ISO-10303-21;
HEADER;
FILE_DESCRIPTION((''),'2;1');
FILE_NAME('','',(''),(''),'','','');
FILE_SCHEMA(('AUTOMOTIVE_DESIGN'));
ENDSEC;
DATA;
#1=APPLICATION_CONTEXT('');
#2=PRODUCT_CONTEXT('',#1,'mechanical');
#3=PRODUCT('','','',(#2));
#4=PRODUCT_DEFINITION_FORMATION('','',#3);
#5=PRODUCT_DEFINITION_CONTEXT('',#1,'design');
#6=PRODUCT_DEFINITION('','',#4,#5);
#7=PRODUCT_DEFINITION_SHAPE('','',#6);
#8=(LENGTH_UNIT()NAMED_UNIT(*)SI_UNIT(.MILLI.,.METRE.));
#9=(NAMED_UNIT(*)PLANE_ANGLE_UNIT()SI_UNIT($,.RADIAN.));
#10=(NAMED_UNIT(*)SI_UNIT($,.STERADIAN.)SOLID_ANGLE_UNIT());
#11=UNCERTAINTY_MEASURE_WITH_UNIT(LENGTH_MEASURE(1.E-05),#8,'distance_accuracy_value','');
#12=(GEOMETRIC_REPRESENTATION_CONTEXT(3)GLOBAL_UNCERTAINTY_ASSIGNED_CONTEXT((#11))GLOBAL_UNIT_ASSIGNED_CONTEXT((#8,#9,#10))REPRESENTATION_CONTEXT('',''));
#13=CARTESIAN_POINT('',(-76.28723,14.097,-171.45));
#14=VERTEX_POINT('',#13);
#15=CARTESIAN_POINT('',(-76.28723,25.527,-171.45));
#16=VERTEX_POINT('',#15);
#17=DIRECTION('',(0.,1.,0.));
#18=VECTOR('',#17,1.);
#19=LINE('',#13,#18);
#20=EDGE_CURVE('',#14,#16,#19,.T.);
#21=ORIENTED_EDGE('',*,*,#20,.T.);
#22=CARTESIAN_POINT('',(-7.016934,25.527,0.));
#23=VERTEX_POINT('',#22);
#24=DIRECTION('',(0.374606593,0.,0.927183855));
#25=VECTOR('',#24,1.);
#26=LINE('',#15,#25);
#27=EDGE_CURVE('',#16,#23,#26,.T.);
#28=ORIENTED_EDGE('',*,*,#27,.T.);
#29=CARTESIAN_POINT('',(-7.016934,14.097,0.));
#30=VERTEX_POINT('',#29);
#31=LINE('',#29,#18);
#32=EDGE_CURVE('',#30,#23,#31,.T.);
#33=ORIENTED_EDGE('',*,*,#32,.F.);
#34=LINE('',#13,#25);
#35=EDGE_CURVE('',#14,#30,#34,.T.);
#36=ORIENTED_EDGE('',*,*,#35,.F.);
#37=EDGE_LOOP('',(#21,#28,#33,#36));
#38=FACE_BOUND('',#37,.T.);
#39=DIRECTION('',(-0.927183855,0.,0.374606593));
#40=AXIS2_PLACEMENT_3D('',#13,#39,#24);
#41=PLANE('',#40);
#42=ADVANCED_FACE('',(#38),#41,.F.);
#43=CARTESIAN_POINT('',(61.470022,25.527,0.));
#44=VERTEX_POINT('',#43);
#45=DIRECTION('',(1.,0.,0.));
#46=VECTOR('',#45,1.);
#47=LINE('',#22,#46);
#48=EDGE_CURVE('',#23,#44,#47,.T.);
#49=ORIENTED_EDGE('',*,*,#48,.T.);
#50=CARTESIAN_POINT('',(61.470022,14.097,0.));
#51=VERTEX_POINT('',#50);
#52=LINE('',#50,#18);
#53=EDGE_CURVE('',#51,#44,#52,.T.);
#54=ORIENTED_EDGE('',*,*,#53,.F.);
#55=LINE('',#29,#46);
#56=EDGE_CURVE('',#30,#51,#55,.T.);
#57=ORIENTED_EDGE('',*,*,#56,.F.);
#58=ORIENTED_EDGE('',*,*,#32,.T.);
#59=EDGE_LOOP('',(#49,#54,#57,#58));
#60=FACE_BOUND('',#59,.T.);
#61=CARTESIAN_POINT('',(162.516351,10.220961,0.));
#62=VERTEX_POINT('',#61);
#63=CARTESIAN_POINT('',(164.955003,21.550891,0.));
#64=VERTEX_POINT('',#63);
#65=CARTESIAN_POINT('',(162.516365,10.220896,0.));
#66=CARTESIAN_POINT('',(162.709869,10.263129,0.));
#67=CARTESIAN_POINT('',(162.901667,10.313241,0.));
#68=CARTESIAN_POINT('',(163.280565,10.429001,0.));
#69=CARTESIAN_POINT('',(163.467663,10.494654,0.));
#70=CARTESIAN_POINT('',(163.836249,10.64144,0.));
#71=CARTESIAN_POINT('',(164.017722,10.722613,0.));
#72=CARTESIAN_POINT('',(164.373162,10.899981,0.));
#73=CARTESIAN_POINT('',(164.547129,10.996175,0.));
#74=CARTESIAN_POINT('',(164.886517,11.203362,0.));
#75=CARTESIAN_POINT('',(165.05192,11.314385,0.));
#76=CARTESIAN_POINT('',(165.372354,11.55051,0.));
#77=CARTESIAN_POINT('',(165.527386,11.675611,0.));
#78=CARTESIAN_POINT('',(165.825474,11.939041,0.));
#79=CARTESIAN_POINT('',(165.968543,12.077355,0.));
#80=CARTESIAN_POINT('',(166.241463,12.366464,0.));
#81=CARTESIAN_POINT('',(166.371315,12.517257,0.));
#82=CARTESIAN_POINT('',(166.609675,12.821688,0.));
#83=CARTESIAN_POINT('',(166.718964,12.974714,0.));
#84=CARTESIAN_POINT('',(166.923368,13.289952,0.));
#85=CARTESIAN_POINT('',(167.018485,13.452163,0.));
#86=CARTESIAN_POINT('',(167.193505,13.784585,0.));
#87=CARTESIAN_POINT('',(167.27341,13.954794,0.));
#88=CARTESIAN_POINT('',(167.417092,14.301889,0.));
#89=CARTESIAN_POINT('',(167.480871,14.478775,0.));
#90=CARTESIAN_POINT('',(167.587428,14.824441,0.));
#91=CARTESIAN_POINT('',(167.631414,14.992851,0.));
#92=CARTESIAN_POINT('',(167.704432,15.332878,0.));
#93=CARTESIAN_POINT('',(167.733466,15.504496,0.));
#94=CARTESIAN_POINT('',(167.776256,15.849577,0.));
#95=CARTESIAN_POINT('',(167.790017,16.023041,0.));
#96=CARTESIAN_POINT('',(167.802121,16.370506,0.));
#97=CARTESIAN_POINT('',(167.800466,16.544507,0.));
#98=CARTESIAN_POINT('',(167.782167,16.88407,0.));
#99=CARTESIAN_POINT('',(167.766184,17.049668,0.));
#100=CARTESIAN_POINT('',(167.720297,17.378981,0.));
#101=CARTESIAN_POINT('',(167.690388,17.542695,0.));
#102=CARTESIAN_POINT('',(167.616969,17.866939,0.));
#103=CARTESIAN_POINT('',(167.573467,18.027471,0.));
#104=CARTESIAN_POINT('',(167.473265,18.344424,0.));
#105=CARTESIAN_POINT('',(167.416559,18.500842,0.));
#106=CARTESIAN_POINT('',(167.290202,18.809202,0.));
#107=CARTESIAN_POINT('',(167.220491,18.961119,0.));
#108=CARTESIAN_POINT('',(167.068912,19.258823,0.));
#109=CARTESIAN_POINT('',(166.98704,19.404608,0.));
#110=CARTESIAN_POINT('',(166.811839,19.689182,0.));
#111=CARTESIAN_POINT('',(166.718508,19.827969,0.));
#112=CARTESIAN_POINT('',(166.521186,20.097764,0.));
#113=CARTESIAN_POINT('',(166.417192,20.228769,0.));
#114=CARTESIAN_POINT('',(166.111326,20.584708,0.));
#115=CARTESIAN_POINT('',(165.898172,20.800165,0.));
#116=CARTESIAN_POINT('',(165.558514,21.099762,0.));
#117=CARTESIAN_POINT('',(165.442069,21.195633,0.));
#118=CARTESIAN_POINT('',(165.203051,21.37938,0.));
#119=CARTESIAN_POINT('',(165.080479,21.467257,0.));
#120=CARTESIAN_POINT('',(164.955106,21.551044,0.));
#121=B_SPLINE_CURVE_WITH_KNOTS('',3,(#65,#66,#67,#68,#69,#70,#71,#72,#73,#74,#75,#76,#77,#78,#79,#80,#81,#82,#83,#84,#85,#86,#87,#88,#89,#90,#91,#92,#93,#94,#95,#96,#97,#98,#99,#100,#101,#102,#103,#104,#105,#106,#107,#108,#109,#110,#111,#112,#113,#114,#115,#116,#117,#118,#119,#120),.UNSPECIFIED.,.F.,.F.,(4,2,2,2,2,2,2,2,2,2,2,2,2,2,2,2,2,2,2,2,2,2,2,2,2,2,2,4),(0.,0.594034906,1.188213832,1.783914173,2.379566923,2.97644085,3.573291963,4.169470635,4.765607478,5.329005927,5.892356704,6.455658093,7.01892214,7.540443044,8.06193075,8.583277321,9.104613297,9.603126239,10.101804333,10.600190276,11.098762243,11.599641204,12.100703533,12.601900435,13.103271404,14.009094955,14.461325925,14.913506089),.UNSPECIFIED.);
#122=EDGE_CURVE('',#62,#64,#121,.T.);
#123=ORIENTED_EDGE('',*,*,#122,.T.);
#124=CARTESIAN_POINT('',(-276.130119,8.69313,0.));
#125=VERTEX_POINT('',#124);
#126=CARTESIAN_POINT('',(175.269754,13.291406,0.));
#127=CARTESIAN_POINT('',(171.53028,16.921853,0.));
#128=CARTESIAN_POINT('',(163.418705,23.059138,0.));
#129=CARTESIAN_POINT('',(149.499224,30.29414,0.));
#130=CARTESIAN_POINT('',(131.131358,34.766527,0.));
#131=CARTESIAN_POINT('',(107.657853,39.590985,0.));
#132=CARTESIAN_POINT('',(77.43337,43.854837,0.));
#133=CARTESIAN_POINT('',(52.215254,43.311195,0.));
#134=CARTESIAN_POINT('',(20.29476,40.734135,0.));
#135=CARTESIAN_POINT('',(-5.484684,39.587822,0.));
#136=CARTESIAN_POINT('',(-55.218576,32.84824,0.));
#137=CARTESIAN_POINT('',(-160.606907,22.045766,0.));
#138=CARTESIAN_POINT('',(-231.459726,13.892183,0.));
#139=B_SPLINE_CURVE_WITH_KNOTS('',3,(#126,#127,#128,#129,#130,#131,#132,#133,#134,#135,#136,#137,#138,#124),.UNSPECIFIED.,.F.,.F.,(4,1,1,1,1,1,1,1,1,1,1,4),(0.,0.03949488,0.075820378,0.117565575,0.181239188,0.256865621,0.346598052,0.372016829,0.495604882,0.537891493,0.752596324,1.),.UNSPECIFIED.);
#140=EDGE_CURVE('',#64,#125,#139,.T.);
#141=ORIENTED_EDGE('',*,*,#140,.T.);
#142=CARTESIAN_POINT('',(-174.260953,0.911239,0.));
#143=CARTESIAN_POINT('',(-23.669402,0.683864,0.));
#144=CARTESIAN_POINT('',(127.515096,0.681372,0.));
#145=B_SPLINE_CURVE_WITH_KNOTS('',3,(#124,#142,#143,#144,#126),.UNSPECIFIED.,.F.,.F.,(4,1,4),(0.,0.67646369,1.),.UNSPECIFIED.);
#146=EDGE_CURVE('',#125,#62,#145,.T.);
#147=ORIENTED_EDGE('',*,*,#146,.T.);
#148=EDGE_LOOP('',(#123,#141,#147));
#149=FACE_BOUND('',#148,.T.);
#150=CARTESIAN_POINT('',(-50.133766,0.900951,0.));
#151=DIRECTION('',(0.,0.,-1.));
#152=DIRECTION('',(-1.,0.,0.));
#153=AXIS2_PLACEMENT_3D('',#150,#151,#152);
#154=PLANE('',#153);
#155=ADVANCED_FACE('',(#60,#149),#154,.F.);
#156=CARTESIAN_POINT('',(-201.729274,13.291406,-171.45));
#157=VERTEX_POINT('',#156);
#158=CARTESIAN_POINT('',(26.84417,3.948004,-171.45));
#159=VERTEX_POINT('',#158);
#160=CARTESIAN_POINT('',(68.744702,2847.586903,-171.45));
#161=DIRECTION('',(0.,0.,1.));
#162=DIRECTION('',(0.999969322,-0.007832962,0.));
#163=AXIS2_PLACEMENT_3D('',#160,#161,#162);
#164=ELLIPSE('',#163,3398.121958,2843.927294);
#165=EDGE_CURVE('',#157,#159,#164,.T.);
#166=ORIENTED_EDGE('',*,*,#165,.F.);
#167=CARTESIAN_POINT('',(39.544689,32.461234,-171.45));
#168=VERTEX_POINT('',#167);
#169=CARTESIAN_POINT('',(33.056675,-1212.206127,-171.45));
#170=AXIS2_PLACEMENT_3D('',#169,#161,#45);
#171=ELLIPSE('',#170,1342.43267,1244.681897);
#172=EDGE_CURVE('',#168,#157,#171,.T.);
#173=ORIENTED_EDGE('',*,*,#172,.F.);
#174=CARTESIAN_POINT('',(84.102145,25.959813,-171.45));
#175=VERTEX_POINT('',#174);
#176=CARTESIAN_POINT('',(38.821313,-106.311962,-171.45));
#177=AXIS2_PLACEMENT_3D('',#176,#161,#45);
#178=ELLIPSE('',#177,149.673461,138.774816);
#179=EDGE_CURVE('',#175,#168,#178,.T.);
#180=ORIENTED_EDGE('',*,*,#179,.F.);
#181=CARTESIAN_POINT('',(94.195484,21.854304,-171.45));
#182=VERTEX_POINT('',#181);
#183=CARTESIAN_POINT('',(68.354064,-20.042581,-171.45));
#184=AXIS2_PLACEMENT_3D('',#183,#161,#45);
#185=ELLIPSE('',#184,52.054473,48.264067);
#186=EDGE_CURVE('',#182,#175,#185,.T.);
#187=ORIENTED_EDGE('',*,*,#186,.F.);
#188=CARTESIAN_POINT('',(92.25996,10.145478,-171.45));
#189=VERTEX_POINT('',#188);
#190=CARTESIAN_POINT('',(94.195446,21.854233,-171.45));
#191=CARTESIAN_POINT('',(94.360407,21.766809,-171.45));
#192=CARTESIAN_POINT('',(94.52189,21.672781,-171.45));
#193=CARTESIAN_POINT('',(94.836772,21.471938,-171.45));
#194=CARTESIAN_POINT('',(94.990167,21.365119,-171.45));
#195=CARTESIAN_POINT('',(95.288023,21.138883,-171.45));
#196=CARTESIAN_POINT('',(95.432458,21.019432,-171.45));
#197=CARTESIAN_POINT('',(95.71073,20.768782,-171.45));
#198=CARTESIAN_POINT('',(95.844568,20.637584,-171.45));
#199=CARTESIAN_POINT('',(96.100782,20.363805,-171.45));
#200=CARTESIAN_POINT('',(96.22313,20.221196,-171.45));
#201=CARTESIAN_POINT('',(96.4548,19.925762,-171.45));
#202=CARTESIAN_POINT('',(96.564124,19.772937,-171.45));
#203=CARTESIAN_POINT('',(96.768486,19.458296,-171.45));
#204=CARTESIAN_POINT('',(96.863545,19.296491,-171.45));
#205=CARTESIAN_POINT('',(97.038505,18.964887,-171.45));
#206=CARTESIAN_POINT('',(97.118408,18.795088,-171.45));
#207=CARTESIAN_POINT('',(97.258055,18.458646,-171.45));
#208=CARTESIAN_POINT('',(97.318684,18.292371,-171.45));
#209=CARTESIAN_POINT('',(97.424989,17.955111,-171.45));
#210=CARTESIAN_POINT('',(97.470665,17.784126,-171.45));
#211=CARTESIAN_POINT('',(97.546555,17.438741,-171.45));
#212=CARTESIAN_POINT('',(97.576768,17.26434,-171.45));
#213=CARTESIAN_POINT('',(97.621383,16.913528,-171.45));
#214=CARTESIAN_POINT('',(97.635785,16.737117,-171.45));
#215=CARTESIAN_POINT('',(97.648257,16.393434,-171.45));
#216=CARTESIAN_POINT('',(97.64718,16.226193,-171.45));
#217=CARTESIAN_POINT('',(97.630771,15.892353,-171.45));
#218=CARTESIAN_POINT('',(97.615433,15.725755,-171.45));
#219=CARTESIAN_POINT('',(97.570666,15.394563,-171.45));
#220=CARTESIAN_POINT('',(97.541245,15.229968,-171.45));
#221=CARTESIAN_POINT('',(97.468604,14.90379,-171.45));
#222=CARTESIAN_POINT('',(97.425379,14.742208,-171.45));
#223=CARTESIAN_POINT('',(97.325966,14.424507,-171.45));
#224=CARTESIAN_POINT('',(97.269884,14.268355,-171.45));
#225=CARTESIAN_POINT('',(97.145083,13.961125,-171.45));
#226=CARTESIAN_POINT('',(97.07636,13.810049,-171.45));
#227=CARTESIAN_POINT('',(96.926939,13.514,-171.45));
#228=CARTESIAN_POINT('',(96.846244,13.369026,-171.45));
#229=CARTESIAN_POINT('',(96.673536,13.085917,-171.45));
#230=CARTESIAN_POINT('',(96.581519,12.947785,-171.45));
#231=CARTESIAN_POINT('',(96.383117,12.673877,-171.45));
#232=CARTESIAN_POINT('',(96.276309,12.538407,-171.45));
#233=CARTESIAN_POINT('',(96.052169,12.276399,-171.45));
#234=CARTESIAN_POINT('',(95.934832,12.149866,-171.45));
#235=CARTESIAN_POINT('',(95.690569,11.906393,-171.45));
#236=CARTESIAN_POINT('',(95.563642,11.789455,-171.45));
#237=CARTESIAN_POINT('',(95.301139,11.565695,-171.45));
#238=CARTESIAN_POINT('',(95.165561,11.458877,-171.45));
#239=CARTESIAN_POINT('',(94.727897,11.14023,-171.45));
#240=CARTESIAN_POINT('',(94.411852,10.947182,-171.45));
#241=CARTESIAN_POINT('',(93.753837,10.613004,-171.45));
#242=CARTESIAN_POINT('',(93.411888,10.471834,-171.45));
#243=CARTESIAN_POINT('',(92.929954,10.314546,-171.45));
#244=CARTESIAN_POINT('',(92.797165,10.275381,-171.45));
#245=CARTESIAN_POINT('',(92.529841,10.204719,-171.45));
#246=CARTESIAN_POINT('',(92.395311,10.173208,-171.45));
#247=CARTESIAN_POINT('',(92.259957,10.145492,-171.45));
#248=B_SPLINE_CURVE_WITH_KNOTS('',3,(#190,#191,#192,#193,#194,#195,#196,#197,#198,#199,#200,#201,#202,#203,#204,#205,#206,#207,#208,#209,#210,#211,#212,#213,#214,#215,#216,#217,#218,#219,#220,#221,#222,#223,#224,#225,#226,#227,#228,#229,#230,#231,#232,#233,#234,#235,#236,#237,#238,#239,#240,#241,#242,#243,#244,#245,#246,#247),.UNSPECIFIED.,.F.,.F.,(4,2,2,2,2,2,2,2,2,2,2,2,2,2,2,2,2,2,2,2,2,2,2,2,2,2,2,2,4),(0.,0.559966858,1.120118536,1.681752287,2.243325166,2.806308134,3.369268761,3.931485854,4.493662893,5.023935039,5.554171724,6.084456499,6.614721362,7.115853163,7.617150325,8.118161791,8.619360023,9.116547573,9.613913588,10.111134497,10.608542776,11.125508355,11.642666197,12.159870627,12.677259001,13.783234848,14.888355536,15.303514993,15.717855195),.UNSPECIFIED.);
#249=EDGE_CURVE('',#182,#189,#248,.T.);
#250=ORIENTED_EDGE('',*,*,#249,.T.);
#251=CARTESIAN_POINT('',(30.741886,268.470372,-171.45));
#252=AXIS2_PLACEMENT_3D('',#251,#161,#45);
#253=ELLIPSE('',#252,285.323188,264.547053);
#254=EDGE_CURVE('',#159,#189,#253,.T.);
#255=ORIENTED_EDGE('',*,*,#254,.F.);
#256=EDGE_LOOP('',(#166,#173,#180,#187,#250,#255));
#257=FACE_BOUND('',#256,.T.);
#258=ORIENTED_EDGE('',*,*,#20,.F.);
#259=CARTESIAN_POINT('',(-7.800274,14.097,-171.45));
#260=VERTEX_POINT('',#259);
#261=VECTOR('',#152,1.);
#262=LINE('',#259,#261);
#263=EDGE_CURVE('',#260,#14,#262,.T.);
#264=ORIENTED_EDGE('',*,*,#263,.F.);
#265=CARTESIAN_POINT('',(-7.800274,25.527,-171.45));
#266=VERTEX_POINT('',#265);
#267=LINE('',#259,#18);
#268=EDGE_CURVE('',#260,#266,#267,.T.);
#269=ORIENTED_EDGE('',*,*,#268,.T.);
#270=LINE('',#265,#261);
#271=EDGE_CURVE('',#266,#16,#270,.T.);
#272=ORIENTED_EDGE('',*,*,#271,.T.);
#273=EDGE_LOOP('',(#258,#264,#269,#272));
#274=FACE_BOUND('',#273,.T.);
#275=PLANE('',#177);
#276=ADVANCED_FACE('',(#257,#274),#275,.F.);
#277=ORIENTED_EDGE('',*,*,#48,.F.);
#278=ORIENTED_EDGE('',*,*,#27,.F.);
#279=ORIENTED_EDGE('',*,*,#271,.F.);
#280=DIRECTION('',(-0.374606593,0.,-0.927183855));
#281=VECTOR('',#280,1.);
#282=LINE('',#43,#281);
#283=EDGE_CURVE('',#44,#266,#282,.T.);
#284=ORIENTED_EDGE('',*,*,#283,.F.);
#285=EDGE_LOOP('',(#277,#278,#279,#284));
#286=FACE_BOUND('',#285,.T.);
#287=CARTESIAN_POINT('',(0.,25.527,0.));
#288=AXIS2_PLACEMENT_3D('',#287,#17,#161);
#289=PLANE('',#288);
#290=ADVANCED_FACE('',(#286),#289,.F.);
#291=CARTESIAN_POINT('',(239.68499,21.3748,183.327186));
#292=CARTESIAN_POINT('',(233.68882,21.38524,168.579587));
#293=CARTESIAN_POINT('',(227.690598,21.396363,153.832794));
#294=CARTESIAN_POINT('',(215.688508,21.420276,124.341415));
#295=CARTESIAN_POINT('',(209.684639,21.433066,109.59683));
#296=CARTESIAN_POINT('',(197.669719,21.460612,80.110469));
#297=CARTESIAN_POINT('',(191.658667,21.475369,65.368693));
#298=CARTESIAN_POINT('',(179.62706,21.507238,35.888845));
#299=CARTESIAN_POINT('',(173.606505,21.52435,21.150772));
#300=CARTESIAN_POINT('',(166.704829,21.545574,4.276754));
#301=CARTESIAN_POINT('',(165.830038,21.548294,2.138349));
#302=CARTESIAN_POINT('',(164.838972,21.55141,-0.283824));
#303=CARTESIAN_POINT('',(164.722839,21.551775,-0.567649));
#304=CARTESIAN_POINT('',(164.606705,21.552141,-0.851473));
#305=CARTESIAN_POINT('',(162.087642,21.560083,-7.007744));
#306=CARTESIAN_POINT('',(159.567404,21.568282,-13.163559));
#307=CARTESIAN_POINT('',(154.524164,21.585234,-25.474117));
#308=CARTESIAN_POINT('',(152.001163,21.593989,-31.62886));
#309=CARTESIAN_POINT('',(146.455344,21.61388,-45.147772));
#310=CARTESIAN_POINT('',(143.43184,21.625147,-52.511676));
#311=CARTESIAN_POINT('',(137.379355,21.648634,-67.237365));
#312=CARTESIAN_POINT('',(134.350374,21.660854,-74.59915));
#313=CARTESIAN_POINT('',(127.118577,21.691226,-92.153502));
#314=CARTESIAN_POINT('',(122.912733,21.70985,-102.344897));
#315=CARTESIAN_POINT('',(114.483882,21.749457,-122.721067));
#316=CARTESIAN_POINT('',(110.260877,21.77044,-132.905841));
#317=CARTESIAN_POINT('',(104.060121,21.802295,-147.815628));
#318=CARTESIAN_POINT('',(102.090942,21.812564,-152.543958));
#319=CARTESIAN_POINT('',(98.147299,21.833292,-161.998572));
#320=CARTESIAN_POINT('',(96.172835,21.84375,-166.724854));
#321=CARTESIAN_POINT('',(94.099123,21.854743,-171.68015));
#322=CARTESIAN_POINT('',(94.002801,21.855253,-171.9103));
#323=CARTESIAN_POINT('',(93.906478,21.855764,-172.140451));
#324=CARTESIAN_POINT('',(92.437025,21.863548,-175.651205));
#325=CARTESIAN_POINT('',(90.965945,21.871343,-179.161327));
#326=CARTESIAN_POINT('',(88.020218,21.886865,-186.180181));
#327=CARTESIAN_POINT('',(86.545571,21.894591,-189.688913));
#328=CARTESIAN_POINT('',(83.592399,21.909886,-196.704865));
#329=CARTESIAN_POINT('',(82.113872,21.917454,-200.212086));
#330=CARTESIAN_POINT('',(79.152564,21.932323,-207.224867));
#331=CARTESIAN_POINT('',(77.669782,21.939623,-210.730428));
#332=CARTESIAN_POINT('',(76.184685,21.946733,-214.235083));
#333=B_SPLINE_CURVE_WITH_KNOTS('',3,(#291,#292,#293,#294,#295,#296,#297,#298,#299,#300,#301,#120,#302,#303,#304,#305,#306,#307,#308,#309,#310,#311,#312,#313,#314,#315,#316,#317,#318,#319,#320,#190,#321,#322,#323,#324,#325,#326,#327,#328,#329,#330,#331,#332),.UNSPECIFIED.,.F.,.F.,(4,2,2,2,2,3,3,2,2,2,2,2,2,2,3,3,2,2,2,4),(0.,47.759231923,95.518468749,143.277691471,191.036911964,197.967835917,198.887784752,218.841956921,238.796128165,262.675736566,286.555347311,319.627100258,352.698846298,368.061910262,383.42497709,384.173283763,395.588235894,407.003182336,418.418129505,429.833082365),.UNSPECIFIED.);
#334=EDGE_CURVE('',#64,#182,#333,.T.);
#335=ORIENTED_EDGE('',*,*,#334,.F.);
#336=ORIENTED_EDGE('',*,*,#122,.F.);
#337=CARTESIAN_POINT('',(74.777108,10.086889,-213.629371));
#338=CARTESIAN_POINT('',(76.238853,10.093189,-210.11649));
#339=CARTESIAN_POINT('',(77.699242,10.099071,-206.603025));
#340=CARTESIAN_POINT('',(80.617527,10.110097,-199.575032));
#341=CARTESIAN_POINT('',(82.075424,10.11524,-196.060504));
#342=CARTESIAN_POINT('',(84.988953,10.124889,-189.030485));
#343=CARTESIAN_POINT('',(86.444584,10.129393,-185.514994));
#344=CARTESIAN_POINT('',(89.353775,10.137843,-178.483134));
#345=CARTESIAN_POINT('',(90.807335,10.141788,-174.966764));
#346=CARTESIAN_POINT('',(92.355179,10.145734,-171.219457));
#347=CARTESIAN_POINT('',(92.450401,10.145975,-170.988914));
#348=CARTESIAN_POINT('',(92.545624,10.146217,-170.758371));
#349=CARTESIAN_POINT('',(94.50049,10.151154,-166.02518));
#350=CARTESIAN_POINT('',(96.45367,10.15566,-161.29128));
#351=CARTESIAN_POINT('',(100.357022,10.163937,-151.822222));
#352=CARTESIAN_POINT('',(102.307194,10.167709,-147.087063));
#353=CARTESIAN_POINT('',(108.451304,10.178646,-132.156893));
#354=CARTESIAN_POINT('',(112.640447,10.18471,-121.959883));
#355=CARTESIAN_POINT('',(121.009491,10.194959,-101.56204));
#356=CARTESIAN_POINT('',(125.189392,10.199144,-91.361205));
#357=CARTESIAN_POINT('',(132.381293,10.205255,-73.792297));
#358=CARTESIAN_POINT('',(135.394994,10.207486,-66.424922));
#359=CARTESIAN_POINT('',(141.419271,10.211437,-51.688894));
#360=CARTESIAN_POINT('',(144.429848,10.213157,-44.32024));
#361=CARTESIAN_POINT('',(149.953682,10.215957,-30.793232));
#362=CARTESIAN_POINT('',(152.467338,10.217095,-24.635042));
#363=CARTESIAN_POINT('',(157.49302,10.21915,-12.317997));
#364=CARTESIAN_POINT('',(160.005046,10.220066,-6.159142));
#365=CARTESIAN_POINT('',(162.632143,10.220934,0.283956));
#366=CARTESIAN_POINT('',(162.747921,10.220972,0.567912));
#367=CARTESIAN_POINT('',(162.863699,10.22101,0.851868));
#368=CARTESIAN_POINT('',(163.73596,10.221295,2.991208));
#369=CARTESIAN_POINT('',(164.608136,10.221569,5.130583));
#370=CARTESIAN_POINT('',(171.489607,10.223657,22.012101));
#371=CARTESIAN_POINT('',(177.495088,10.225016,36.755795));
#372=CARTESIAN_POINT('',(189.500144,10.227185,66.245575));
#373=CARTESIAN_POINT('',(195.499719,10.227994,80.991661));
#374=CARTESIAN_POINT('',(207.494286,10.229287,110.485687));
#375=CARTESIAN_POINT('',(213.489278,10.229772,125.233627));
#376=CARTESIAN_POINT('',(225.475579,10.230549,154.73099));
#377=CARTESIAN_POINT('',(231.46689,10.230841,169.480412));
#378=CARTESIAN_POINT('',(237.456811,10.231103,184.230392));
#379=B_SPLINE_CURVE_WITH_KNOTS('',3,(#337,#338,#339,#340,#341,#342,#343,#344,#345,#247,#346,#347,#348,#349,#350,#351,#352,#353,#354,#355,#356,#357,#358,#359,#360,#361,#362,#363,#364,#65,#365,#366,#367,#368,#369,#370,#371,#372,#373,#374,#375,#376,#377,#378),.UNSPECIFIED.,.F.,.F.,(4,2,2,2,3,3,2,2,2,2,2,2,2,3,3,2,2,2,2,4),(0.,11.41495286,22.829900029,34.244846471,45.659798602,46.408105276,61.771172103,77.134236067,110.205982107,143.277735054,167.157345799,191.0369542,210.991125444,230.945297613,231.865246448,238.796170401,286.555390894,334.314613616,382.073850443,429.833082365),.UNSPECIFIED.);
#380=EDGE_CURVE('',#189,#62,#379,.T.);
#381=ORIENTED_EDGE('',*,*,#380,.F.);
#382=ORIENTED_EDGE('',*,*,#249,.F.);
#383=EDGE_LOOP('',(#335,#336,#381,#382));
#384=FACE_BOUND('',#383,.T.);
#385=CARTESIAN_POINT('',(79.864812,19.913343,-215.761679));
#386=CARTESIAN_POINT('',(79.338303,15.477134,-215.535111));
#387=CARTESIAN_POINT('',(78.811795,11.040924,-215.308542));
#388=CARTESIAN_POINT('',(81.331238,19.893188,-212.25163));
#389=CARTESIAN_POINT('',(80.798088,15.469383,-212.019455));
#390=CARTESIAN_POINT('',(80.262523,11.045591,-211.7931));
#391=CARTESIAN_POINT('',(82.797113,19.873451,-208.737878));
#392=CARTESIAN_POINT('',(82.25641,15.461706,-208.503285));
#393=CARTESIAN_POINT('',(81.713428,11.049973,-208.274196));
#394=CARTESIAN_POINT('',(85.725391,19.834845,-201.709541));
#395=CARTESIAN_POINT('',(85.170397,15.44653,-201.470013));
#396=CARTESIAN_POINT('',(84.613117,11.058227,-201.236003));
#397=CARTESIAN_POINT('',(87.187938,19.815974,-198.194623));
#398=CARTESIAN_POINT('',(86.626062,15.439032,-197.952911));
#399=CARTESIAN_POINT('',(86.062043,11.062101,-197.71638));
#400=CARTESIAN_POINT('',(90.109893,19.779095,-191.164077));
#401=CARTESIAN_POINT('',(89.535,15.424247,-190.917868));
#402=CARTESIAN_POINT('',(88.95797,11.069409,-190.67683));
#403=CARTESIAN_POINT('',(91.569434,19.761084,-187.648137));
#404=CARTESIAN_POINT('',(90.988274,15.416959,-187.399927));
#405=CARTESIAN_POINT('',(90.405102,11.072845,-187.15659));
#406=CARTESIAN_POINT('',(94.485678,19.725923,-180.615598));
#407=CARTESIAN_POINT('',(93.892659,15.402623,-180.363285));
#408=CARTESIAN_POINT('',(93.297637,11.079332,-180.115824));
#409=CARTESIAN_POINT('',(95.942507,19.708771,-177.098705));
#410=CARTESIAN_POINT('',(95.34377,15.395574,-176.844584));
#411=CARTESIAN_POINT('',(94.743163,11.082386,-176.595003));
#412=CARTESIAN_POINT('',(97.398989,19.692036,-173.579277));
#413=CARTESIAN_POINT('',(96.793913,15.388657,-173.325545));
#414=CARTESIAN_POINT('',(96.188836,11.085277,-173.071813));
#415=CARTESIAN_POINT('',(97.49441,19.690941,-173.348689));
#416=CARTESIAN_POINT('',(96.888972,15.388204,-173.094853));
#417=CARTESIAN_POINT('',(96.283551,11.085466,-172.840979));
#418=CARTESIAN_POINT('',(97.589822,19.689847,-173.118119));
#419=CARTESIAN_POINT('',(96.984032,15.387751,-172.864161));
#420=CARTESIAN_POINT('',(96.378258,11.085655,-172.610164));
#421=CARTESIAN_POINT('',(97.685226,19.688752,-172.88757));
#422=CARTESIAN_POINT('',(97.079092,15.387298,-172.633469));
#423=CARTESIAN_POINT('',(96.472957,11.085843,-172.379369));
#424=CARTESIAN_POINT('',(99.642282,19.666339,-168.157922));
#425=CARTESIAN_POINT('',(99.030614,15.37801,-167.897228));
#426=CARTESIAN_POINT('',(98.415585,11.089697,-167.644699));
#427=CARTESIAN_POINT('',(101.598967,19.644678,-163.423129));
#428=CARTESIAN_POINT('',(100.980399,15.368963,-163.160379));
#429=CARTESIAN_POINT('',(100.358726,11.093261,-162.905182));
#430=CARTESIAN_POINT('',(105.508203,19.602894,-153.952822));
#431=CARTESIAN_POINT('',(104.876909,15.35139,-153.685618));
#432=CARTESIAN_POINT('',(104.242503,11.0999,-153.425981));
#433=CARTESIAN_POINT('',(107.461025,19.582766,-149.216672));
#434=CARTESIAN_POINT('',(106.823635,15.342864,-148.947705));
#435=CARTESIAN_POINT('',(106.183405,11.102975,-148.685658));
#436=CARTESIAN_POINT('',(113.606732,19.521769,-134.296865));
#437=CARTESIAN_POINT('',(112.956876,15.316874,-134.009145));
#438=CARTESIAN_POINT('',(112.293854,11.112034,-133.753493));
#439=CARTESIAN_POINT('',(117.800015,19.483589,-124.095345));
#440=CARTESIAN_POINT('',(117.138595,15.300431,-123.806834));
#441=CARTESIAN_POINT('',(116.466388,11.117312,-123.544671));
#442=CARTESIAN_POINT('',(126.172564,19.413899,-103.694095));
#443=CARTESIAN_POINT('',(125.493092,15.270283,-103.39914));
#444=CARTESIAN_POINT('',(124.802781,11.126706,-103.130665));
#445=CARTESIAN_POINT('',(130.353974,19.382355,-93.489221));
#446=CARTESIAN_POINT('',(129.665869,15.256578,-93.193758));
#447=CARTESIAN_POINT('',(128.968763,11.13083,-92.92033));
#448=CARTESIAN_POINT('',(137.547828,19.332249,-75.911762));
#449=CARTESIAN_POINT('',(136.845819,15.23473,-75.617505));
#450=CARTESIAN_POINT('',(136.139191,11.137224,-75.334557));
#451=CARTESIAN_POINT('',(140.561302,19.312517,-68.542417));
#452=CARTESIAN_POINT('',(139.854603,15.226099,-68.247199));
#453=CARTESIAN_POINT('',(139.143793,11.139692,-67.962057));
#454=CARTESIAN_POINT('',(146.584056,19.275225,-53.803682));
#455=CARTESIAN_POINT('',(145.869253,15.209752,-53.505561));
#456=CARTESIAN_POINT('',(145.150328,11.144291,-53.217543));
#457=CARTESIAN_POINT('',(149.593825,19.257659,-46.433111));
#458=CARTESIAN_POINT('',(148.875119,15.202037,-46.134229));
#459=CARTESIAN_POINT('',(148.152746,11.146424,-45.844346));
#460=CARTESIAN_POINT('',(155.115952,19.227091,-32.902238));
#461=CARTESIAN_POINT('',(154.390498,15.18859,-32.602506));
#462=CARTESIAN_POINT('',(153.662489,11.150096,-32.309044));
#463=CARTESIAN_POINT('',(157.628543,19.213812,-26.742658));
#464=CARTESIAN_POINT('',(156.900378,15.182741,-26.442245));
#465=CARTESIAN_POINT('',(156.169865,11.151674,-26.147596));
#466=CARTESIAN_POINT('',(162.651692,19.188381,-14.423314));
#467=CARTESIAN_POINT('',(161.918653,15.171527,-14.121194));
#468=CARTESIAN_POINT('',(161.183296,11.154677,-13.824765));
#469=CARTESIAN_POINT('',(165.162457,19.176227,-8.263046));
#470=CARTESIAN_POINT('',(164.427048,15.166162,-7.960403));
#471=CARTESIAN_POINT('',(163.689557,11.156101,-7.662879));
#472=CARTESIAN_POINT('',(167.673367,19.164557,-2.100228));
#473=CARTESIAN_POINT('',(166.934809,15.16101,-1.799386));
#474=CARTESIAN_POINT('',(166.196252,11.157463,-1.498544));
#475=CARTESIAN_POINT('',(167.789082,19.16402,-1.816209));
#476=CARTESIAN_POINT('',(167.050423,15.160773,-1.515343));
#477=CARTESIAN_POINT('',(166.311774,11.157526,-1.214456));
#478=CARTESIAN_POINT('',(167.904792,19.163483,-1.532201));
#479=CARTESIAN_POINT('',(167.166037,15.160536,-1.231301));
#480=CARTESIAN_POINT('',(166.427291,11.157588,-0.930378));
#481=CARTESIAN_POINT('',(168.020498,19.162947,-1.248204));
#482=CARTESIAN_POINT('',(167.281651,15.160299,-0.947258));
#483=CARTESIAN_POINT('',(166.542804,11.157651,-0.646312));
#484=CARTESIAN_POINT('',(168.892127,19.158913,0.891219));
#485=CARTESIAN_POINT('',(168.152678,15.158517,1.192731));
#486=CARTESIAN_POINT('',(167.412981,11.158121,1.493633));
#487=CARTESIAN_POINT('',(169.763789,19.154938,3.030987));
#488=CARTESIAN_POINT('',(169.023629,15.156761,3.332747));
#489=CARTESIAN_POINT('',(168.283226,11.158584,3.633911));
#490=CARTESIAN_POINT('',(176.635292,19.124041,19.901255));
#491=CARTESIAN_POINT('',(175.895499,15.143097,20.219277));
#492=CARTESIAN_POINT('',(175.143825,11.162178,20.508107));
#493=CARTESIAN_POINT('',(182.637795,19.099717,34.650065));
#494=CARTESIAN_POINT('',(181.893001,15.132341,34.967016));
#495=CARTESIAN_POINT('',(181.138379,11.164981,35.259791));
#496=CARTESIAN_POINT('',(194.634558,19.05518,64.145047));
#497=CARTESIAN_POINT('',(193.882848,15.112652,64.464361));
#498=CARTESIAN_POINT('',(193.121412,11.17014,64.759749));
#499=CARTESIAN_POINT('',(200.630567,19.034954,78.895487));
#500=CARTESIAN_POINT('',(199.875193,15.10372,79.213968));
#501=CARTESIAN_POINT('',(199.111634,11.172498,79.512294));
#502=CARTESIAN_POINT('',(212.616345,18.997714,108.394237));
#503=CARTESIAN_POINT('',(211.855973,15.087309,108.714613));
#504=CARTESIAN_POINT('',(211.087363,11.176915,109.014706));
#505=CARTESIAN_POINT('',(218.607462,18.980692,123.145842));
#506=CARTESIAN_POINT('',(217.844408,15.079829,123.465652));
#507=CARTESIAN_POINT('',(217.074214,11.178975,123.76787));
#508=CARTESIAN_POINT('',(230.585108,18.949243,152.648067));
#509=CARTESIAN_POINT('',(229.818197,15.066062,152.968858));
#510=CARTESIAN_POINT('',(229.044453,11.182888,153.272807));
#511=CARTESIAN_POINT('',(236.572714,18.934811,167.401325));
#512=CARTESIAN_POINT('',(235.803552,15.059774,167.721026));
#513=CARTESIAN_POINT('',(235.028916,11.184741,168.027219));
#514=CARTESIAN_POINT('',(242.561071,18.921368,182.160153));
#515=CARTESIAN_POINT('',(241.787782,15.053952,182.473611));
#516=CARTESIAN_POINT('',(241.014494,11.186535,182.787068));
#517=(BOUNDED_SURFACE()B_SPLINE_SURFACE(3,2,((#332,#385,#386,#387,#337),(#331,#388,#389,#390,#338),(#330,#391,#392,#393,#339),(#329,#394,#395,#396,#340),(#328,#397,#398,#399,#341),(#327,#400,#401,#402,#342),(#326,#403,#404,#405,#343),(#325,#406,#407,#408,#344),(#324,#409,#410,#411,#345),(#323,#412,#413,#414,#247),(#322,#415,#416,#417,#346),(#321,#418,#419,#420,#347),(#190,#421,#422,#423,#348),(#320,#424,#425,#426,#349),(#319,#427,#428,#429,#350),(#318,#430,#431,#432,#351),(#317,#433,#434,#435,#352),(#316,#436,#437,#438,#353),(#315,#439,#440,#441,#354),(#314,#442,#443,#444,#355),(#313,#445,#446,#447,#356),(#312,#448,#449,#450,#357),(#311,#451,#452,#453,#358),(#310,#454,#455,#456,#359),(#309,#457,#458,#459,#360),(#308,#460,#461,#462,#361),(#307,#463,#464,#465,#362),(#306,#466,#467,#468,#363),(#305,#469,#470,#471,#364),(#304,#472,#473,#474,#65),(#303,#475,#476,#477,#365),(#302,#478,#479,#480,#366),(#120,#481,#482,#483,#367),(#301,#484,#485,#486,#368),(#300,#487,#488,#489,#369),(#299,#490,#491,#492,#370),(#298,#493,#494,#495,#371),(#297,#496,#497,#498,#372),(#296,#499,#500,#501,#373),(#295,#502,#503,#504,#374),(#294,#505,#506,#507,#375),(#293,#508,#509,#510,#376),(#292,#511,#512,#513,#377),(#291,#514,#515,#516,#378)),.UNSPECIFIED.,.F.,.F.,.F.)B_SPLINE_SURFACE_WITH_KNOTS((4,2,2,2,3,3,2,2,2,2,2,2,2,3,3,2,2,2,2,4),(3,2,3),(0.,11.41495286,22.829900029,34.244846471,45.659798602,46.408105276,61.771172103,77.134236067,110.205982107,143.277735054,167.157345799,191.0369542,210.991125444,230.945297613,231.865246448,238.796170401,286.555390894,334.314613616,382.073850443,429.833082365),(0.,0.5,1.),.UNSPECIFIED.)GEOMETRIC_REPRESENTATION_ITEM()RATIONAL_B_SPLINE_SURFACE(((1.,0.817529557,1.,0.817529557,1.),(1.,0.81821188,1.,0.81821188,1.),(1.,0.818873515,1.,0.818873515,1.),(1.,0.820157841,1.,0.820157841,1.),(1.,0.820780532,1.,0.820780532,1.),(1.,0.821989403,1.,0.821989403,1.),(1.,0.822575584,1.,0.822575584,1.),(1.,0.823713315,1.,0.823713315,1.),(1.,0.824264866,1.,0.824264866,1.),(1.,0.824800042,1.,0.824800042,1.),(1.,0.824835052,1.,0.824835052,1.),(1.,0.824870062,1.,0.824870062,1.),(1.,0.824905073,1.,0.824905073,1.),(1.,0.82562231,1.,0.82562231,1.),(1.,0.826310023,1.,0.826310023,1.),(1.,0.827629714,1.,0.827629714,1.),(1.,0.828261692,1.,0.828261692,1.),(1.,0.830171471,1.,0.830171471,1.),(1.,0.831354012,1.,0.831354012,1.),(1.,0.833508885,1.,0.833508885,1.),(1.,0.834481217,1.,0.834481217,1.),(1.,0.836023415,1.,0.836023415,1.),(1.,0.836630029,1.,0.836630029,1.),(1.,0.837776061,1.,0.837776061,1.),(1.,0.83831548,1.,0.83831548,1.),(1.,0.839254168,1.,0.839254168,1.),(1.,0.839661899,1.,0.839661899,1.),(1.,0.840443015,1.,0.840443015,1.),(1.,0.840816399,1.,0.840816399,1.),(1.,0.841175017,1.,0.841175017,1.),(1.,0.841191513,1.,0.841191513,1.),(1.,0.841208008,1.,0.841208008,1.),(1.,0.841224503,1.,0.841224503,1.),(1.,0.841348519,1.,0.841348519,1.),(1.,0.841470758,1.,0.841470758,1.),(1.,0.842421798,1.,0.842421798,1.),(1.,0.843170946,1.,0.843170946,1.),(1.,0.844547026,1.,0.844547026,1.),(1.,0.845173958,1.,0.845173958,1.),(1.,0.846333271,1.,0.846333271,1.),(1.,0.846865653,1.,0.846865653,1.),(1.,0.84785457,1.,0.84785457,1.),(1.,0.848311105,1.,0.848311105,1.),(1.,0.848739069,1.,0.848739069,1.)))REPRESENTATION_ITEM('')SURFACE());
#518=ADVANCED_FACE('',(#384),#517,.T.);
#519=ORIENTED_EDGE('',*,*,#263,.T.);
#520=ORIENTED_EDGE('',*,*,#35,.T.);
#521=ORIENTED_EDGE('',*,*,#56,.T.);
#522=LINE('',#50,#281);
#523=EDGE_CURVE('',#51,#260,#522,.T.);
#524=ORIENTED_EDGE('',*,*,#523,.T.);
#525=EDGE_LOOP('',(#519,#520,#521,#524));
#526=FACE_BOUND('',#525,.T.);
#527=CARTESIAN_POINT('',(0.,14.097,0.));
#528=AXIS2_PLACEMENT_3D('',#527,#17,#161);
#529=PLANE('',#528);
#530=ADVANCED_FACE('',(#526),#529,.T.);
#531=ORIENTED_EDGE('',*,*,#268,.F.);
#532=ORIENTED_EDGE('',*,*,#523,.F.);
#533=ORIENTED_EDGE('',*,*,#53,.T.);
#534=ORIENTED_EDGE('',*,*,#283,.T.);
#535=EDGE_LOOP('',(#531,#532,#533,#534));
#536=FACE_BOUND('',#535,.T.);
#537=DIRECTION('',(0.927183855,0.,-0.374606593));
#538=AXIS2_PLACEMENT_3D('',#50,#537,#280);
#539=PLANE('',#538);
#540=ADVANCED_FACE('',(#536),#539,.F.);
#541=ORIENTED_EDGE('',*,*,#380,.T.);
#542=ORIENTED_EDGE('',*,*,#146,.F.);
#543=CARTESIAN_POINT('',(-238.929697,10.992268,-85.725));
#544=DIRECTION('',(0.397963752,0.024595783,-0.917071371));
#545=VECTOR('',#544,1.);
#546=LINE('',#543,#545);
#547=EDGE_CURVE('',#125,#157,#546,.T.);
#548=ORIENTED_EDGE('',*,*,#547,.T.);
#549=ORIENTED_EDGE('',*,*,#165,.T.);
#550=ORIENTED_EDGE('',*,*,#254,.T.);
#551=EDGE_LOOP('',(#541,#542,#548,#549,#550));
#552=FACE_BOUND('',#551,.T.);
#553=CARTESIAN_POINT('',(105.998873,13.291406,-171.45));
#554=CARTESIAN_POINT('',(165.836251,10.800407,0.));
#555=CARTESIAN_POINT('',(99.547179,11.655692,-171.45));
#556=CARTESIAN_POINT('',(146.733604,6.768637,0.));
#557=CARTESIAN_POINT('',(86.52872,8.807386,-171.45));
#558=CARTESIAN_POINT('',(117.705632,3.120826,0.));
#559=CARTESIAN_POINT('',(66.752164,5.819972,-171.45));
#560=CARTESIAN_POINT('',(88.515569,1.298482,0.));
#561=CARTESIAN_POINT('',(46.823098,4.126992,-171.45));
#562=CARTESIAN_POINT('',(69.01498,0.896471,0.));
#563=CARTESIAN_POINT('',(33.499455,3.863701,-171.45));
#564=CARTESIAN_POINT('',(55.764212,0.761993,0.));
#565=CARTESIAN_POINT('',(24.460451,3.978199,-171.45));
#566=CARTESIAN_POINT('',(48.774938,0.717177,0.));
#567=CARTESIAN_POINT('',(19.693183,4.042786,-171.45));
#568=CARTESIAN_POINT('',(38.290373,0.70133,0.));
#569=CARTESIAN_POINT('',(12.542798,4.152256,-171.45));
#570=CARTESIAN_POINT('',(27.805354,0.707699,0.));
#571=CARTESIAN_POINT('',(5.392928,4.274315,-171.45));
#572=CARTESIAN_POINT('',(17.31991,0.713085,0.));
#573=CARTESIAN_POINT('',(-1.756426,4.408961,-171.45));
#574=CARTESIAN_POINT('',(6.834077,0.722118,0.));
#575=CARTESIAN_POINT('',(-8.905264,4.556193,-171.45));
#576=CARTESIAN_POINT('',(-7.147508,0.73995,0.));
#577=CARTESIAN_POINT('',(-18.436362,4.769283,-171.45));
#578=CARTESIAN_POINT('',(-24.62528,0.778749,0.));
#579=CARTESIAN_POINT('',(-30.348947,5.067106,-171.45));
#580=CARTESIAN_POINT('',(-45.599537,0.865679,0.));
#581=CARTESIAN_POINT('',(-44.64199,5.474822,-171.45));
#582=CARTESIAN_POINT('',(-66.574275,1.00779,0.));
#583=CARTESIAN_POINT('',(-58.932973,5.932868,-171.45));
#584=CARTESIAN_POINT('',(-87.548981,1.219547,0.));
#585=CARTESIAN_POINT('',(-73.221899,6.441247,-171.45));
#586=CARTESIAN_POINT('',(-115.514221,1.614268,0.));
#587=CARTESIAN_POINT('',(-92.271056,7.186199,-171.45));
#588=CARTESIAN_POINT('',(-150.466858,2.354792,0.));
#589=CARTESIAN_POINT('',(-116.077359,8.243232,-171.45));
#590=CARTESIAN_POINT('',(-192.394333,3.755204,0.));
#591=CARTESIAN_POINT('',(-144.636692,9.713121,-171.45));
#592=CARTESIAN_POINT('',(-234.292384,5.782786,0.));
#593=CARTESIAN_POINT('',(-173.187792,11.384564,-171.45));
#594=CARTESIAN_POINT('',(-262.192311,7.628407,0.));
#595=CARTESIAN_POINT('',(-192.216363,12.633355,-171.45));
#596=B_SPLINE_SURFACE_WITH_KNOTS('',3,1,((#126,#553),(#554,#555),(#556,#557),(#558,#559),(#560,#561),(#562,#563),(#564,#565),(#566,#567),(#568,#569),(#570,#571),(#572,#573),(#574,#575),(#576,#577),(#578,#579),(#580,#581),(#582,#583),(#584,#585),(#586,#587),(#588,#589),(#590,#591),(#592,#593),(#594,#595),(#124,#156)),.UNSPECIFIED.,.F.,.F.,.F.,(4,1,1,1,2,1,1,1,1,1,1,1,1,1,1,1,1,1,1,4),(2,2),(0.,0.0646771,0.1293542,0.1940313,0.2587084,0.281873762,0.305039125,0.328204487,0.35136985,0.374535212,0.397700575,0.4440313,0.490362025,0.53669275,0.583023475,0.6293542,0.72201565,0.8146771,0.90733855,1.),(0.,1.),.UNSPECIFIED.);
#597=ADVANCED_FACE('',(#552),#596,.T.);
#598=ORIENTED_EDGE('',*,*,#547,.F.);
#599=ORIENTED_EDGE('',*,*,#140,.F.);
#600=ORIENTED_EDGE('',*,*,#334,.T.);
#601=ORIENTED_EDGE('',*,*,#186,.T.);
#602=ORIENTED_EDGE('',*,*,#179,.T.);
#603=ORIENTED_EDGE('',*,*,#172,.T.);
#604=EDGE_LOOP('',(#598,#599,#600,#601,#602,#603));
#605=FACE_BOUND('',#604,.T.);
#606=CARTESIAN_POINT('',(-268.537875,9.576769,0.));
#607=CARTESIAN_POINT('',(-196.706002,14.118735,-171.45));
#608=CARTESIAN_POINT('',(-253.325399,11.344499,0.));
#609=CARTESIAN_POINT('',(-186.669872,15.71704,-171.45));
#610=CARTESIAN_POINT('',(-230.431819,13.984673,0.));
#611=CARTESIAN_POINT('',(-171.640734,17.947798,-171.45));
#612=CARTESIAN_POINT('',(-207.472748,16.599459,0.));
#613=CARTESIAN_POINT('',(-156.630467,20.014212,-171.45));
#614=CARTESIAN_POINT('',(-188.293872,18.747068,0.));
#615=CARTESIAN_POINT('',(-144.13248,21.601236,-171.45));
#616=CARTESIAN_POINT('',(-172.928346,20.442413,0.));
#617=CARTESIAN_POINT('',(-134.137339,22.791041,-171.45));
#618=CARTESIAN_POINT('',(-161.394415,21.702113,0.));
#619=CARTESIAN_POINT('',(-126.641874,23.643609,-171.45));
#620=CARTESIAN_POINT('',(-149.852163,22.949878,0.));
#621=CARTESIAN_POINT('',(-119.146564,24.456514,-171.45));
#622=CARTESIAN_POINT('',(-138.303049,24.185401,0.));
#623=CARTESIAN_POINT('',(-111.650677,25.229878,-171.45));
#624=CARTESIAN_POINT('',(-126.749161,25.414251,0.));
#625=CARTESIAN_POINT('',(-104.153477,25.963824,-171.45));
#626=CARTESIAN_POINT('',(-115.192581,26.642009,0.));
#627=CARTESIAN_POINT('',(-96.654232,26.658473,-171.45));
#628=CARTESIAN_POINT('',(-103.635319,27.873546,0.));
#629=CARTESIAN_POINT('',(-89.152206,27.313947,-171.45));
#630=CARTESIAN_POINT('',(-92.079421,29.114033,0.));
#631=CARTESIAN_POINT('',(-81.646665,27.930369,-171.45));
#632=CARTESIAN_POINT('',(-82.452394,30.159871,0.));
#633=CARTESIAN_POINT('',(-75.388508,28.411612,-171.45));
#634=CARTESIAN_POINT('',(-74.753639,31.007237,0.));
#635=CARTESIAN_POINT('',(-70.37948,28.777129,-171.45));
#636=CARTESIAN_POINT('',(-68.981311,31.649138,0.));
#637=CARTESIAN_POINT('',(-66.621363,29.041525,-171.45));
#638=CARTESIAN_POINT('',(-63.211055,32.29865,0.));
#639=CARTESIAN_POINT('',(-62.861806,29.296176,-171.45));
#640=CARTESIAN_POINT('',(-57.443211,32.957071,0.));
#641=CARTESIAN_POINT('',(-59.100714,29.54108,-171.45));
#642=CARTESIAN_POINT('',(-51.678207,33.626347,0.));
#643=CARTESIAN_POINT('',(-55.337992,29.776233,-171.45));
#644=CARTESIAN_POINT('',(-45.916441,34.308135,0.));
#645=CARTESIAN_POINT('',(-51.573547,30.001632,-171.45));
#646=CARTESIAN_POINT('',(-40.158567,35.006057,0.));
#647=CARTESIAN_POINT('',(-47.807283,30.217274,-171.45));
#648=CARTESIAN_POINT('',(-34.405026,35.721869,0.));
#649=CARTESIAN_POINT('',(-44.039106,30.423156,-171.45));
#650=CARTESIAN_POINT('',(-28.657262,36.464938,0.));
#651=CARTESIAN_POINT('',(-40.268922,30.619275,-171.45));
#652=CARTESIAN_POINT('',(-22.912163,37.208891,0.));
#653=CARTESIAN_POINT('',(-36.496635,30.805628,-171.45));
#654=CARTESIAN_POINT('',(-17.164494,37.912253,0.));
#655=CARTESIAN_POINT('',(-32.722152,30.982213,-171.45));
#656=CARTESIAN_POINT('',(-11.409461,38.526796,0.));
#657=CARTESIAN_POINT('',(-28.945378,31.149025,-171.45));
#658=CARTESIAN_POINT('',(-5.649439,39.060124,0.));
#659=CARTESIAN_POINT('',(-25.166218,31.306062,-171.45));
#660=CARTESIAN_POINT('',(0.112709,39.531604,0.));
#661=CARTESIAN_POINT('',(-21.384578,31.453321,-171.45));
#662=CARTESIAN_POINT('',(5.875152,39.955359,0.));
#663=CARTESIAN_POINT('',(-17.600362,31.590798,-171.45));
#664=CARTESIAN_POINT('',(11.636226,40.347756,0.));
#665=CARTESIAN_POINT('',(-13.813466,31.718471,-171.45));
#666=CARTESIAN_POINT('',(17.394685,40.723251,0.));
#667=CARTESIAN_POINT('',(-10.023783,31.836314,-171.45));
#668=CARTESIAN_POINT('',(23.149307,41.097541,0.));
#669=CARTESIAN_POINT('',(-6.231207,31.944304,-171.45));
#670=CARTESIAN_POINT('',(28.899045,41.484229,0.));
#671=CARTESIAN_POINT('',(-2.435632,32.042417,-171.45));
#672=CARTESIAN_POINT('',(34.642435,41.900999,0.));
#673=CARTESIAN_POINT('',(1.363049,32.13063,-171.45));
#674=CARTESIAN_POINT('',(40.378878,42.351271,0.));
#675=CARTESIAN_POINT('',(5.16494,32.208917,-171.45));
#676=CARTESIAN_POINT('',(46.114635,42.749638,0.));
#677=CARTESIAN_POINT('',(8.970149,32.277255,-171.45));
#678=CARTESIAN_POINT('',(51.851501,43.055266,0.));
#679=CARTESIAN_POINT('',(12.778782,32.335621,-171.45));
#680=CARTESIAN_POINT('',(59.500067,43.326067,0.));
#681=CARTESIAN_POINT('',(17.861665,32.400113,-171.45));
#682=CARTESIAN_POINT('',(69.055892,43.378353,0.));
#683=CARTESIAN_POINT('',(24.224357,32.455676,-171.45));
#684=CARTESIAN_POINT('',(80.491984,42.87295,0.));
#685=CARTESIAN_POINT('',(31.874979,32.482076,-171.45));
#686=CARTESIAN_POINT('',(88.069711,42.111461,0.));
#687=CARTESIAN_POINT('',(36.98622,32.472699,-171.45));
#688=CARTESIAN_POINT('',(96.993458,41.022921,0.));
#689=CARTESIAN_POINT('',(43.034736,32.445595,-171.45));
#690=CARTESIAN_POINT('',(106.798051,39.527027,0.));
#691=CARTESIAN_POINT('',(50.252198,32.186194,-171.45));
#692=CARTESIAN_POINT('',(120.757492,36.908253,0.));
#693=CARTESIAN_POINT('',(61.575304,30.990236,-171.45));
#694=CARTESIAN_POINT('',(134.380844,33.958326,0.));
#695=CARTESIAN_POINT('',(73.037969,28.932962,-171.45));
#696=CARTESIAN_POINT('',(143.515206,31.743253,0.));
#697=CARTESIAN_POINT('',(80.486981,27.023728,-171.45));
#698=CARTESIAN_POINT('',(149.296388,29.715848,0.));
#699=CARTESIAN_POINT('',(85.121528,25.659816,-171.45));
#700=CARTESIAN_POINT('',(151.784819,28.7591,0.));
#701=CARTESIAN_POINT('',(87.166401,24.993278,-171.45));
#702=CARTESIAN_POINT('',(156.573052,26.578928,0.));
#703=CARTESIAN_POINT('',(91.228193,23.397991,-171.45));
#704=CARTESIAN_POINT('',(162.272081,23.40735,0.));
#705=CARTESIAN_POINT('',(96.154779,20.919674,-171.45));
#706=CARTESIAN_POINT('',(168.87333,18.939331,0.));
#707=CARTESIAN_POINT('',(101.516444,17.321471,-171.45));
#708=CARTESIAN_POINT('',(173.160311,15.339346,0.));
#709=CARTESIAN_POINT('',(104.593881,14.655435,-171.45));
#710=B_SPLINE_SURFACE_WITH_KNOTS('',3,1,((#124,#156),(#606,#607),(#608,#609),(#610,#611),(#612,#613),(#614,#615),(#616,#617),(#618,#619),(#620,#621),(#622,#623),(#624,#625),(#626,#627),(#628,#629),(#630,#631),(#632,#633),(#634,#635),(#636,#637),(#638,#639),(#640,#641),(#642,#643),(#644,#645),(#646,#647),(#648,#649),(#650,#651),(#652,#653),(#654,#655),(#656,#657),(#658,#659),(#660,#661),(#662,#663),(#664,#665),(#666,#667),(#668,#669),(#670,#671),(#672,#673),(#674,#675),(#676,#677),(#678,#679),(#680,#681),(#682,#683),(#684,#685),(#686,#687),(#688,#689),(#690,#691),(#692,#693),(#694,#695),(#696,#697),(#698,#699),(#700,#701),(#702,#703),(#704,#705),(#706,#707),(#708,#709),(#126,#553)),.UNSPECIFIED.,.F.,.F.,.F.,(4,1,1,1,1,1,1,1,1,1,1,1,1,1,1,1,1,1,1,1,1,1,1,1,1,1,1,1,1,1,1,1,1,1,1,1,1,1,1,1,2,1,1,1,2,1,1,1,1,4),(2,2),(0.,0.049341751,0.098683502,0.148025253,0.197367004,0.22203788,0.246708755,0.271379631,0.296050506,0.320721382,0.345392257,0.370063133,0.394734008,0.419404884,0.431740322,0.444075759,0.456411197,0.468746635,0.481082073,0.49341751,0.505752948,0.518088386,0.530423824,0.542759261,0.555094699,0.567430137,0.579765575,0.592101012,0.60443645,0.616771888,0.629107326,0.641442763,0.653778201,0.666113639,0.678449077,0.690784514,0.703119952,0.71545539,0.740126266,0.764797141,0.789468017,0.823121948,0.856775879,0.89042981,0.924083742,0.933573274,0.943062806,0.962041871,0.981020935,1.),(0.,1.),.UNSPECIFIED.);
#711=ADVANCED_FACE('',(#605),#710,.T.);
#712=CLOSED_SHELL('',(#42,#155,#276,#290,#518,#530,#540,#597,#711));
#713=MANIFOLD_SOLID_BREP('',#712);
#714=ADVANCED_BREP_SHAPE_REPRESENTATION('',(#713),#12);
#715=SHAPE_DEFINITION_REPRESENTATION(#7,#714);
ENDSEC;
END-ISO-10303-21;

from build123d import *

# Parameters (mm, degrees)
FILLET1_R          = 6.35
CUT_EXTRUDE2_DEPTH = 5.715


with BuildPart() as part:
    # Loft1: read off the stored shape, not the designer's step
    # Loft1: loft between two sections, ruled curve by curve
    loft1_from = [
        Edge.make_bspline([(175.269753602, 13.29140622, 0), (165.836250903, 10.800407431, 0), (146.733604162, 6.768636817, 0), (117.705631888, 3.120825545, 0), (88.515569293, 1.298481639, 0), (69.014979931, 0.896470859, 0), (55.76421182, 0.761993128, 0), (48.774937515, 0.717177079, 0), (38.290373313, 0.701329652, 0), (27.805353703, 0.707699483, 0), (17.319910015, 0.713085206, 0), (6.83407663, 0.722118469, 0), (-7.147508406, 0.739950104, 0), (-24.625279721, 0.778748607, 0), (-45.599536509, 0.865679132, 0), (-66.57427479, 1.007789933, 0), (-87.548981294, 1.219546921, 0), (-115.514221109, 1.6142682, 0), (-150.466857604, 2.354791987, 0), (-192.394333089, 3.75520411, 0), (-234.292384281, 5.782786145, 0), (-262.192310795, 7.628406717, 0), (-276.130119323, 8.693130358, 0)], [0, 0, 0, 0, 0.0646771, 0.1293542, 0.1940313, 0.2587084, 0.2587084, 0.281873762, 0.305039125, 0.328204487, 0.35136985, 0.374535212, 0.397700575, 0.4440313, 0.490362025, 0.53669275, 0.583023475, 0.6293542, 0.72201565, 0.8146771, 0.90733855, 1, 1, 1, 1], 3),
        Edge.make_bspline([(-276.130119323, 8.693130358, 0), (-268.53787532, 9.576768707, 0), (-253.325399224, 11.344499336, 0), (-230.431819466, 13.984673016, 0), (-207.472747934, 16.599459007, 0), (-188.293872161, 18.747068462, 0), (-172.928345638, 20.442413166, 0), (-161.394414944, 21.702112718, 0), (-149.852162971, 22.949878112, 0), (-138.303049105, 24.185400988, 0), (-126.749160881, 25.414250719, 0), (-115.192581437, 26.642009102, 0), (-103.635319012, 27.873545783, 0), (-92.079421128, 29.114032776, 0), (-82.4523943, 30.15987089, 0), (-74.753639148, 31.007237325, 0), (-68.981311413, 31.649138297, 0), (-63.211054502, 32.298649993, 0), (-57.443210697, 32.957070927, 0), (-51.678207111, 33.626346988, 0), (-45.916440626, 34.308134914, 0), (-40.158566872, 35.006057107, 0), (-34.405025776, 35.721868628, 0), (-28.65726222, 36.464938228, 0), (-22.912163066, 37.208891257, 0), (-17.164494437, 37.912252593, 0), (-11.409460822, 38.52679641, 0), (-5.649439363, 39.060124365, 0), (0.112709129, 39.531603667, 0), (5.875152486, 39.955359252, 0), (11.636225955, 40.347755751, 0), (17.394685212, 40.723251, 0), (23.149306668, 41.097541248, 0), (28.899044879, 41.484229227, 0), (34.642434767, 41.900999198, 0), (40.378877605, 42.351270671, 0), (46.114635135, 42.749637865, 0), (51.851500917, 43.055266027, 0), (59.500067158, 43.326067455, 0), (69.055892317, 43.378352696, 0), (80.491984345, 42.872950191, 0), (88.069711352, 42.111461167, 0), (96.99345827, 41.022920564, 0), (106.798051302, 39.527027067, 0), (120.757492461, 36.908252937, 0), (134.380844207, 33.958325891, 0), (143.515206323, 31.743252941, 0), (149.29638768, 29.715848138, 0), (151.784819047, 28.759100363, 0), (156.573051684, 26.578927821, 0), (162.27208079, 23.407349715, 0), (168.873329947, 18.939330848, 0), (173.160310936, 15.339346478, 0), (175.269753602, 13.29140622, 0)], [0, 0, 0, 0, 0.049341751, 0.098683502, 0.148025253, 0.197367004, 0.22203788, 0.246708755, 0.271379631, 0.296050506, 0.320721382, 0.345392257, 0.370063133, 0.394734008, 0.419404884, 0.431740322, 0.444075759, 0.456411197, 0.468746635, 0.481082073, 0.49341751, 0.505752948, 0.518088386, 0.530423824, 0.542759261, 0.555094699, 0.567430137, 0.579765575, 0.592101012, 0.60443645, 0.616771888, 0.629107326, 0.641442763, 0.653778201, 0.666113639, 0.678449077, 0.690784514, 0.703119952, 0.71545539, 0.740126266, 0.764797141, 0.789468017, 0.789468017, 0.823121948, 0.856775879, 0.89042981, 0.924083742, 0.924083742, 0.933573274, 0.943062806, 0.962041871, 0.981020935, 1, 1, 1, 1], 3),
    ]
    loft1_to = [
        Edge.make_bspline([(105.998873038, 13.291406071, -171.45), (99.547178972, 11.655691815, -171.45), (86.528720121, 8.807386477, -171.45), (66.752163818, 5.81997153, -171.45), (46.823097819, 4.126992417, -171.45), (33.499454727, 3.863700867, -171.45), (24.460450661, 3.97819944, -171.45), (19.693183294, 4.042786303, -171.45), (12.542798034, 4.152256247, -171.45), (5.392928427, 4.274314749, -171.45), (-1.75642567, 4.408960717, -171.45), (-8.905264395, 4.556193059, -171.45), (-18.436362387, 4.769283228, -171.45), (-30.34894715, 5.067106419, -171.45), (-44.641989626, 5.474822285, -171.45), (-58.932973358, 5.932868481, -171.45), (-73.221898844, 6.441247299, -171.45), (-92.271055825, 7.186198942, -171.45), (-116.077358919, 8.24323151, -171.45), (-144.636691691, 9.71312147, -171.45), (-173.187791596, 11.38456436, -171.45), (-192.216363366, 12.633355108, -171.45), (-201.72927398, 13.291406071, -171.45)], [0, 0, 0, 0, 0.0646771, 0.1293542, 0.1940313, 0.2587084, 0.2587084, 0.281873762, 0.305039125, 0.328204487, 0.35136985, 0.374535212, 0.397700575, 0.4440313, 0.490362025, 0.53669275, 0.583023475, 0.6293542, 0.72201565, 0.8146771, 0.90733855, 1, 1, 1, 1], 3),
        Edge.make_bspline([(-201.72927398, 13.291406071, -171.45), (-196.706001762, 14.118734782, -171.45), (-186.669871897, 15.717039915, -171.45), (-171.640734103, 17.947797667, -171.45), (-156.630466607, 20.014212394, -171.45), (-144.132480019, 21.601236244, -171.45), (-134.13733919, 22.791040732, -171.45), (-126.641873709, 23.64360893, -171.45), (-119.146564288, 24.456514085, -171.45), (-111.650676847, 25.229878327, -171.45), (-104.153477306, 25.963823782, -171.45), (-96.654231583, 26.658472577, -171.45), (-89.152205599, 27.313946841, -171.45), (-81.646665274, 27.9303687, -171.45), (-75.388507985, 28.411611685, -171.45), (-70.379479761, 28.777128777, -171.45), (-66.621362852, 29.041524908, -171.45), (-62.861805656, 29.296176313, -171.45), (-59.100713628, 29.541079951, -171.45), (-55.337992223, 29.776232783, -171.45), (-51.573546895, 30.001631769, -171.45), (-47.8072831, 30.217273872, -171.45), (-44.039106291, 30.42315605, -171.45), (-40.268921924, 30.619275264, -171.45), (-36.496635452, 30.805628475, -171.45), (-32.722152332, 30.982212644, -171.45), (-28.945378018, 31.149024731, -171.45), (-25.166217963, 31.306061697, -171.45), (-21.384577624, 31.453320502, -171.45), (-17.600362454, 31.590798107, -171.45), (-13.813466378, 31.718470556, -171.45), (-10.023783319, 31.836313894, -171.45), (-6.231207201, 31.944304163, -171.45), (-2.435631947, 32.042417409, -171.45), (1.363048518, 32.130629675, -171.45), (5.164940272, 32.208917006, -171.45), (8.970149389, 32.277255445, -171.45), (12.778781947, 32.335621037, -171.45), (17.861664714, 32.400112757, -171.45), (24.224357154, 32.455675508, -171.45), (31.874979066, 32.482076127, -171.45), (36.986220068, 32.472698987, -171.45), (43.034735977, 32.445594637, -171.45), (50.252197512, 32.186193716, -171.45), (61.575304209, 30.990235835, -171.45), (73.03796941, 28.932962432, -171.45), (80.486980807, 27.023727732, -171.45), (85.121527508, 25.659816178, -171.45), (87.166401389, 24.993278477, -171.45), (91.228193462, 23.397991092, -171.45), (96.154779045, 20.919674072, -171.45), (101.516443745, 17.32147055, -171.45), (104.593880705, 14.655434782, -171.45), (105.998873038, 13.291406071, -171.45)], [0, 0, 0, 0, 0.049341751, 0.098683502, 0.148025253, 0.197367004, 0.22203788, 0.246708755, 0.271379631, 0.296050506, 0.320721382, 0.345392257, 0.370063133, 0.394734008, 0.419404884, 0.431740322, 0.444075759, 0.456411197, 0.468746635, 0.481082073, 0.49341751, 0.505752948, 0.518088386, 0.530423824, 0.542759261, 0.555094699, 0.567430137, 0.579765575, 0.592101012, 0.60443645, 0.616771888, 0.629107326, 0.641442763, 0.653778201, 0.666113639, 0.678449077, 0.690784514, 0.703119952, 0.71545539, 0.740126266, 0.764797141, 0.789468017, 0.789468017, 0.823121948, 0.856775879, 0.89042981, 0.924083742, 0.924083742, 0.933573274, 0.943062806, 0.962041871, 0.981020935, 1, 1, 1, 1], 3),
    ]
    loft1 = Solid(Shell([*[Face.make_surface_from_curves(loft1_from[k], loft1_to[k]) for k in range(2)], Face(Wire(loft1_from)), Face(Wire(loft1_to))]))
    add(loft1)

    # Fillet1
    fillet1_edges = [part.edges().sort_by_distance(p)[0] for p in [
        (140.63431332, 13.291406146, -85.725),
    ]]
    fillet(fillet1_edges, radius=FILLET1_R)

    # Sketch9 → Cut-Extrude2 (cut, symmetric)
    with BuildSketch(Plane(origin=(0, 19.812, 0), x_dir=(1, 0, 0), z_dir=(0, 1, 0))):
        Polygon((-7.80027398, 171.45), (-76.28723014, 171.45), (-7.016933721, 0), (61.470022439, 0), align=None)
    extrude(amount=CUT_EXTRUDE2_DEPTH, both=True, mode=Mode.SUBTRACT)


solid = part.part
